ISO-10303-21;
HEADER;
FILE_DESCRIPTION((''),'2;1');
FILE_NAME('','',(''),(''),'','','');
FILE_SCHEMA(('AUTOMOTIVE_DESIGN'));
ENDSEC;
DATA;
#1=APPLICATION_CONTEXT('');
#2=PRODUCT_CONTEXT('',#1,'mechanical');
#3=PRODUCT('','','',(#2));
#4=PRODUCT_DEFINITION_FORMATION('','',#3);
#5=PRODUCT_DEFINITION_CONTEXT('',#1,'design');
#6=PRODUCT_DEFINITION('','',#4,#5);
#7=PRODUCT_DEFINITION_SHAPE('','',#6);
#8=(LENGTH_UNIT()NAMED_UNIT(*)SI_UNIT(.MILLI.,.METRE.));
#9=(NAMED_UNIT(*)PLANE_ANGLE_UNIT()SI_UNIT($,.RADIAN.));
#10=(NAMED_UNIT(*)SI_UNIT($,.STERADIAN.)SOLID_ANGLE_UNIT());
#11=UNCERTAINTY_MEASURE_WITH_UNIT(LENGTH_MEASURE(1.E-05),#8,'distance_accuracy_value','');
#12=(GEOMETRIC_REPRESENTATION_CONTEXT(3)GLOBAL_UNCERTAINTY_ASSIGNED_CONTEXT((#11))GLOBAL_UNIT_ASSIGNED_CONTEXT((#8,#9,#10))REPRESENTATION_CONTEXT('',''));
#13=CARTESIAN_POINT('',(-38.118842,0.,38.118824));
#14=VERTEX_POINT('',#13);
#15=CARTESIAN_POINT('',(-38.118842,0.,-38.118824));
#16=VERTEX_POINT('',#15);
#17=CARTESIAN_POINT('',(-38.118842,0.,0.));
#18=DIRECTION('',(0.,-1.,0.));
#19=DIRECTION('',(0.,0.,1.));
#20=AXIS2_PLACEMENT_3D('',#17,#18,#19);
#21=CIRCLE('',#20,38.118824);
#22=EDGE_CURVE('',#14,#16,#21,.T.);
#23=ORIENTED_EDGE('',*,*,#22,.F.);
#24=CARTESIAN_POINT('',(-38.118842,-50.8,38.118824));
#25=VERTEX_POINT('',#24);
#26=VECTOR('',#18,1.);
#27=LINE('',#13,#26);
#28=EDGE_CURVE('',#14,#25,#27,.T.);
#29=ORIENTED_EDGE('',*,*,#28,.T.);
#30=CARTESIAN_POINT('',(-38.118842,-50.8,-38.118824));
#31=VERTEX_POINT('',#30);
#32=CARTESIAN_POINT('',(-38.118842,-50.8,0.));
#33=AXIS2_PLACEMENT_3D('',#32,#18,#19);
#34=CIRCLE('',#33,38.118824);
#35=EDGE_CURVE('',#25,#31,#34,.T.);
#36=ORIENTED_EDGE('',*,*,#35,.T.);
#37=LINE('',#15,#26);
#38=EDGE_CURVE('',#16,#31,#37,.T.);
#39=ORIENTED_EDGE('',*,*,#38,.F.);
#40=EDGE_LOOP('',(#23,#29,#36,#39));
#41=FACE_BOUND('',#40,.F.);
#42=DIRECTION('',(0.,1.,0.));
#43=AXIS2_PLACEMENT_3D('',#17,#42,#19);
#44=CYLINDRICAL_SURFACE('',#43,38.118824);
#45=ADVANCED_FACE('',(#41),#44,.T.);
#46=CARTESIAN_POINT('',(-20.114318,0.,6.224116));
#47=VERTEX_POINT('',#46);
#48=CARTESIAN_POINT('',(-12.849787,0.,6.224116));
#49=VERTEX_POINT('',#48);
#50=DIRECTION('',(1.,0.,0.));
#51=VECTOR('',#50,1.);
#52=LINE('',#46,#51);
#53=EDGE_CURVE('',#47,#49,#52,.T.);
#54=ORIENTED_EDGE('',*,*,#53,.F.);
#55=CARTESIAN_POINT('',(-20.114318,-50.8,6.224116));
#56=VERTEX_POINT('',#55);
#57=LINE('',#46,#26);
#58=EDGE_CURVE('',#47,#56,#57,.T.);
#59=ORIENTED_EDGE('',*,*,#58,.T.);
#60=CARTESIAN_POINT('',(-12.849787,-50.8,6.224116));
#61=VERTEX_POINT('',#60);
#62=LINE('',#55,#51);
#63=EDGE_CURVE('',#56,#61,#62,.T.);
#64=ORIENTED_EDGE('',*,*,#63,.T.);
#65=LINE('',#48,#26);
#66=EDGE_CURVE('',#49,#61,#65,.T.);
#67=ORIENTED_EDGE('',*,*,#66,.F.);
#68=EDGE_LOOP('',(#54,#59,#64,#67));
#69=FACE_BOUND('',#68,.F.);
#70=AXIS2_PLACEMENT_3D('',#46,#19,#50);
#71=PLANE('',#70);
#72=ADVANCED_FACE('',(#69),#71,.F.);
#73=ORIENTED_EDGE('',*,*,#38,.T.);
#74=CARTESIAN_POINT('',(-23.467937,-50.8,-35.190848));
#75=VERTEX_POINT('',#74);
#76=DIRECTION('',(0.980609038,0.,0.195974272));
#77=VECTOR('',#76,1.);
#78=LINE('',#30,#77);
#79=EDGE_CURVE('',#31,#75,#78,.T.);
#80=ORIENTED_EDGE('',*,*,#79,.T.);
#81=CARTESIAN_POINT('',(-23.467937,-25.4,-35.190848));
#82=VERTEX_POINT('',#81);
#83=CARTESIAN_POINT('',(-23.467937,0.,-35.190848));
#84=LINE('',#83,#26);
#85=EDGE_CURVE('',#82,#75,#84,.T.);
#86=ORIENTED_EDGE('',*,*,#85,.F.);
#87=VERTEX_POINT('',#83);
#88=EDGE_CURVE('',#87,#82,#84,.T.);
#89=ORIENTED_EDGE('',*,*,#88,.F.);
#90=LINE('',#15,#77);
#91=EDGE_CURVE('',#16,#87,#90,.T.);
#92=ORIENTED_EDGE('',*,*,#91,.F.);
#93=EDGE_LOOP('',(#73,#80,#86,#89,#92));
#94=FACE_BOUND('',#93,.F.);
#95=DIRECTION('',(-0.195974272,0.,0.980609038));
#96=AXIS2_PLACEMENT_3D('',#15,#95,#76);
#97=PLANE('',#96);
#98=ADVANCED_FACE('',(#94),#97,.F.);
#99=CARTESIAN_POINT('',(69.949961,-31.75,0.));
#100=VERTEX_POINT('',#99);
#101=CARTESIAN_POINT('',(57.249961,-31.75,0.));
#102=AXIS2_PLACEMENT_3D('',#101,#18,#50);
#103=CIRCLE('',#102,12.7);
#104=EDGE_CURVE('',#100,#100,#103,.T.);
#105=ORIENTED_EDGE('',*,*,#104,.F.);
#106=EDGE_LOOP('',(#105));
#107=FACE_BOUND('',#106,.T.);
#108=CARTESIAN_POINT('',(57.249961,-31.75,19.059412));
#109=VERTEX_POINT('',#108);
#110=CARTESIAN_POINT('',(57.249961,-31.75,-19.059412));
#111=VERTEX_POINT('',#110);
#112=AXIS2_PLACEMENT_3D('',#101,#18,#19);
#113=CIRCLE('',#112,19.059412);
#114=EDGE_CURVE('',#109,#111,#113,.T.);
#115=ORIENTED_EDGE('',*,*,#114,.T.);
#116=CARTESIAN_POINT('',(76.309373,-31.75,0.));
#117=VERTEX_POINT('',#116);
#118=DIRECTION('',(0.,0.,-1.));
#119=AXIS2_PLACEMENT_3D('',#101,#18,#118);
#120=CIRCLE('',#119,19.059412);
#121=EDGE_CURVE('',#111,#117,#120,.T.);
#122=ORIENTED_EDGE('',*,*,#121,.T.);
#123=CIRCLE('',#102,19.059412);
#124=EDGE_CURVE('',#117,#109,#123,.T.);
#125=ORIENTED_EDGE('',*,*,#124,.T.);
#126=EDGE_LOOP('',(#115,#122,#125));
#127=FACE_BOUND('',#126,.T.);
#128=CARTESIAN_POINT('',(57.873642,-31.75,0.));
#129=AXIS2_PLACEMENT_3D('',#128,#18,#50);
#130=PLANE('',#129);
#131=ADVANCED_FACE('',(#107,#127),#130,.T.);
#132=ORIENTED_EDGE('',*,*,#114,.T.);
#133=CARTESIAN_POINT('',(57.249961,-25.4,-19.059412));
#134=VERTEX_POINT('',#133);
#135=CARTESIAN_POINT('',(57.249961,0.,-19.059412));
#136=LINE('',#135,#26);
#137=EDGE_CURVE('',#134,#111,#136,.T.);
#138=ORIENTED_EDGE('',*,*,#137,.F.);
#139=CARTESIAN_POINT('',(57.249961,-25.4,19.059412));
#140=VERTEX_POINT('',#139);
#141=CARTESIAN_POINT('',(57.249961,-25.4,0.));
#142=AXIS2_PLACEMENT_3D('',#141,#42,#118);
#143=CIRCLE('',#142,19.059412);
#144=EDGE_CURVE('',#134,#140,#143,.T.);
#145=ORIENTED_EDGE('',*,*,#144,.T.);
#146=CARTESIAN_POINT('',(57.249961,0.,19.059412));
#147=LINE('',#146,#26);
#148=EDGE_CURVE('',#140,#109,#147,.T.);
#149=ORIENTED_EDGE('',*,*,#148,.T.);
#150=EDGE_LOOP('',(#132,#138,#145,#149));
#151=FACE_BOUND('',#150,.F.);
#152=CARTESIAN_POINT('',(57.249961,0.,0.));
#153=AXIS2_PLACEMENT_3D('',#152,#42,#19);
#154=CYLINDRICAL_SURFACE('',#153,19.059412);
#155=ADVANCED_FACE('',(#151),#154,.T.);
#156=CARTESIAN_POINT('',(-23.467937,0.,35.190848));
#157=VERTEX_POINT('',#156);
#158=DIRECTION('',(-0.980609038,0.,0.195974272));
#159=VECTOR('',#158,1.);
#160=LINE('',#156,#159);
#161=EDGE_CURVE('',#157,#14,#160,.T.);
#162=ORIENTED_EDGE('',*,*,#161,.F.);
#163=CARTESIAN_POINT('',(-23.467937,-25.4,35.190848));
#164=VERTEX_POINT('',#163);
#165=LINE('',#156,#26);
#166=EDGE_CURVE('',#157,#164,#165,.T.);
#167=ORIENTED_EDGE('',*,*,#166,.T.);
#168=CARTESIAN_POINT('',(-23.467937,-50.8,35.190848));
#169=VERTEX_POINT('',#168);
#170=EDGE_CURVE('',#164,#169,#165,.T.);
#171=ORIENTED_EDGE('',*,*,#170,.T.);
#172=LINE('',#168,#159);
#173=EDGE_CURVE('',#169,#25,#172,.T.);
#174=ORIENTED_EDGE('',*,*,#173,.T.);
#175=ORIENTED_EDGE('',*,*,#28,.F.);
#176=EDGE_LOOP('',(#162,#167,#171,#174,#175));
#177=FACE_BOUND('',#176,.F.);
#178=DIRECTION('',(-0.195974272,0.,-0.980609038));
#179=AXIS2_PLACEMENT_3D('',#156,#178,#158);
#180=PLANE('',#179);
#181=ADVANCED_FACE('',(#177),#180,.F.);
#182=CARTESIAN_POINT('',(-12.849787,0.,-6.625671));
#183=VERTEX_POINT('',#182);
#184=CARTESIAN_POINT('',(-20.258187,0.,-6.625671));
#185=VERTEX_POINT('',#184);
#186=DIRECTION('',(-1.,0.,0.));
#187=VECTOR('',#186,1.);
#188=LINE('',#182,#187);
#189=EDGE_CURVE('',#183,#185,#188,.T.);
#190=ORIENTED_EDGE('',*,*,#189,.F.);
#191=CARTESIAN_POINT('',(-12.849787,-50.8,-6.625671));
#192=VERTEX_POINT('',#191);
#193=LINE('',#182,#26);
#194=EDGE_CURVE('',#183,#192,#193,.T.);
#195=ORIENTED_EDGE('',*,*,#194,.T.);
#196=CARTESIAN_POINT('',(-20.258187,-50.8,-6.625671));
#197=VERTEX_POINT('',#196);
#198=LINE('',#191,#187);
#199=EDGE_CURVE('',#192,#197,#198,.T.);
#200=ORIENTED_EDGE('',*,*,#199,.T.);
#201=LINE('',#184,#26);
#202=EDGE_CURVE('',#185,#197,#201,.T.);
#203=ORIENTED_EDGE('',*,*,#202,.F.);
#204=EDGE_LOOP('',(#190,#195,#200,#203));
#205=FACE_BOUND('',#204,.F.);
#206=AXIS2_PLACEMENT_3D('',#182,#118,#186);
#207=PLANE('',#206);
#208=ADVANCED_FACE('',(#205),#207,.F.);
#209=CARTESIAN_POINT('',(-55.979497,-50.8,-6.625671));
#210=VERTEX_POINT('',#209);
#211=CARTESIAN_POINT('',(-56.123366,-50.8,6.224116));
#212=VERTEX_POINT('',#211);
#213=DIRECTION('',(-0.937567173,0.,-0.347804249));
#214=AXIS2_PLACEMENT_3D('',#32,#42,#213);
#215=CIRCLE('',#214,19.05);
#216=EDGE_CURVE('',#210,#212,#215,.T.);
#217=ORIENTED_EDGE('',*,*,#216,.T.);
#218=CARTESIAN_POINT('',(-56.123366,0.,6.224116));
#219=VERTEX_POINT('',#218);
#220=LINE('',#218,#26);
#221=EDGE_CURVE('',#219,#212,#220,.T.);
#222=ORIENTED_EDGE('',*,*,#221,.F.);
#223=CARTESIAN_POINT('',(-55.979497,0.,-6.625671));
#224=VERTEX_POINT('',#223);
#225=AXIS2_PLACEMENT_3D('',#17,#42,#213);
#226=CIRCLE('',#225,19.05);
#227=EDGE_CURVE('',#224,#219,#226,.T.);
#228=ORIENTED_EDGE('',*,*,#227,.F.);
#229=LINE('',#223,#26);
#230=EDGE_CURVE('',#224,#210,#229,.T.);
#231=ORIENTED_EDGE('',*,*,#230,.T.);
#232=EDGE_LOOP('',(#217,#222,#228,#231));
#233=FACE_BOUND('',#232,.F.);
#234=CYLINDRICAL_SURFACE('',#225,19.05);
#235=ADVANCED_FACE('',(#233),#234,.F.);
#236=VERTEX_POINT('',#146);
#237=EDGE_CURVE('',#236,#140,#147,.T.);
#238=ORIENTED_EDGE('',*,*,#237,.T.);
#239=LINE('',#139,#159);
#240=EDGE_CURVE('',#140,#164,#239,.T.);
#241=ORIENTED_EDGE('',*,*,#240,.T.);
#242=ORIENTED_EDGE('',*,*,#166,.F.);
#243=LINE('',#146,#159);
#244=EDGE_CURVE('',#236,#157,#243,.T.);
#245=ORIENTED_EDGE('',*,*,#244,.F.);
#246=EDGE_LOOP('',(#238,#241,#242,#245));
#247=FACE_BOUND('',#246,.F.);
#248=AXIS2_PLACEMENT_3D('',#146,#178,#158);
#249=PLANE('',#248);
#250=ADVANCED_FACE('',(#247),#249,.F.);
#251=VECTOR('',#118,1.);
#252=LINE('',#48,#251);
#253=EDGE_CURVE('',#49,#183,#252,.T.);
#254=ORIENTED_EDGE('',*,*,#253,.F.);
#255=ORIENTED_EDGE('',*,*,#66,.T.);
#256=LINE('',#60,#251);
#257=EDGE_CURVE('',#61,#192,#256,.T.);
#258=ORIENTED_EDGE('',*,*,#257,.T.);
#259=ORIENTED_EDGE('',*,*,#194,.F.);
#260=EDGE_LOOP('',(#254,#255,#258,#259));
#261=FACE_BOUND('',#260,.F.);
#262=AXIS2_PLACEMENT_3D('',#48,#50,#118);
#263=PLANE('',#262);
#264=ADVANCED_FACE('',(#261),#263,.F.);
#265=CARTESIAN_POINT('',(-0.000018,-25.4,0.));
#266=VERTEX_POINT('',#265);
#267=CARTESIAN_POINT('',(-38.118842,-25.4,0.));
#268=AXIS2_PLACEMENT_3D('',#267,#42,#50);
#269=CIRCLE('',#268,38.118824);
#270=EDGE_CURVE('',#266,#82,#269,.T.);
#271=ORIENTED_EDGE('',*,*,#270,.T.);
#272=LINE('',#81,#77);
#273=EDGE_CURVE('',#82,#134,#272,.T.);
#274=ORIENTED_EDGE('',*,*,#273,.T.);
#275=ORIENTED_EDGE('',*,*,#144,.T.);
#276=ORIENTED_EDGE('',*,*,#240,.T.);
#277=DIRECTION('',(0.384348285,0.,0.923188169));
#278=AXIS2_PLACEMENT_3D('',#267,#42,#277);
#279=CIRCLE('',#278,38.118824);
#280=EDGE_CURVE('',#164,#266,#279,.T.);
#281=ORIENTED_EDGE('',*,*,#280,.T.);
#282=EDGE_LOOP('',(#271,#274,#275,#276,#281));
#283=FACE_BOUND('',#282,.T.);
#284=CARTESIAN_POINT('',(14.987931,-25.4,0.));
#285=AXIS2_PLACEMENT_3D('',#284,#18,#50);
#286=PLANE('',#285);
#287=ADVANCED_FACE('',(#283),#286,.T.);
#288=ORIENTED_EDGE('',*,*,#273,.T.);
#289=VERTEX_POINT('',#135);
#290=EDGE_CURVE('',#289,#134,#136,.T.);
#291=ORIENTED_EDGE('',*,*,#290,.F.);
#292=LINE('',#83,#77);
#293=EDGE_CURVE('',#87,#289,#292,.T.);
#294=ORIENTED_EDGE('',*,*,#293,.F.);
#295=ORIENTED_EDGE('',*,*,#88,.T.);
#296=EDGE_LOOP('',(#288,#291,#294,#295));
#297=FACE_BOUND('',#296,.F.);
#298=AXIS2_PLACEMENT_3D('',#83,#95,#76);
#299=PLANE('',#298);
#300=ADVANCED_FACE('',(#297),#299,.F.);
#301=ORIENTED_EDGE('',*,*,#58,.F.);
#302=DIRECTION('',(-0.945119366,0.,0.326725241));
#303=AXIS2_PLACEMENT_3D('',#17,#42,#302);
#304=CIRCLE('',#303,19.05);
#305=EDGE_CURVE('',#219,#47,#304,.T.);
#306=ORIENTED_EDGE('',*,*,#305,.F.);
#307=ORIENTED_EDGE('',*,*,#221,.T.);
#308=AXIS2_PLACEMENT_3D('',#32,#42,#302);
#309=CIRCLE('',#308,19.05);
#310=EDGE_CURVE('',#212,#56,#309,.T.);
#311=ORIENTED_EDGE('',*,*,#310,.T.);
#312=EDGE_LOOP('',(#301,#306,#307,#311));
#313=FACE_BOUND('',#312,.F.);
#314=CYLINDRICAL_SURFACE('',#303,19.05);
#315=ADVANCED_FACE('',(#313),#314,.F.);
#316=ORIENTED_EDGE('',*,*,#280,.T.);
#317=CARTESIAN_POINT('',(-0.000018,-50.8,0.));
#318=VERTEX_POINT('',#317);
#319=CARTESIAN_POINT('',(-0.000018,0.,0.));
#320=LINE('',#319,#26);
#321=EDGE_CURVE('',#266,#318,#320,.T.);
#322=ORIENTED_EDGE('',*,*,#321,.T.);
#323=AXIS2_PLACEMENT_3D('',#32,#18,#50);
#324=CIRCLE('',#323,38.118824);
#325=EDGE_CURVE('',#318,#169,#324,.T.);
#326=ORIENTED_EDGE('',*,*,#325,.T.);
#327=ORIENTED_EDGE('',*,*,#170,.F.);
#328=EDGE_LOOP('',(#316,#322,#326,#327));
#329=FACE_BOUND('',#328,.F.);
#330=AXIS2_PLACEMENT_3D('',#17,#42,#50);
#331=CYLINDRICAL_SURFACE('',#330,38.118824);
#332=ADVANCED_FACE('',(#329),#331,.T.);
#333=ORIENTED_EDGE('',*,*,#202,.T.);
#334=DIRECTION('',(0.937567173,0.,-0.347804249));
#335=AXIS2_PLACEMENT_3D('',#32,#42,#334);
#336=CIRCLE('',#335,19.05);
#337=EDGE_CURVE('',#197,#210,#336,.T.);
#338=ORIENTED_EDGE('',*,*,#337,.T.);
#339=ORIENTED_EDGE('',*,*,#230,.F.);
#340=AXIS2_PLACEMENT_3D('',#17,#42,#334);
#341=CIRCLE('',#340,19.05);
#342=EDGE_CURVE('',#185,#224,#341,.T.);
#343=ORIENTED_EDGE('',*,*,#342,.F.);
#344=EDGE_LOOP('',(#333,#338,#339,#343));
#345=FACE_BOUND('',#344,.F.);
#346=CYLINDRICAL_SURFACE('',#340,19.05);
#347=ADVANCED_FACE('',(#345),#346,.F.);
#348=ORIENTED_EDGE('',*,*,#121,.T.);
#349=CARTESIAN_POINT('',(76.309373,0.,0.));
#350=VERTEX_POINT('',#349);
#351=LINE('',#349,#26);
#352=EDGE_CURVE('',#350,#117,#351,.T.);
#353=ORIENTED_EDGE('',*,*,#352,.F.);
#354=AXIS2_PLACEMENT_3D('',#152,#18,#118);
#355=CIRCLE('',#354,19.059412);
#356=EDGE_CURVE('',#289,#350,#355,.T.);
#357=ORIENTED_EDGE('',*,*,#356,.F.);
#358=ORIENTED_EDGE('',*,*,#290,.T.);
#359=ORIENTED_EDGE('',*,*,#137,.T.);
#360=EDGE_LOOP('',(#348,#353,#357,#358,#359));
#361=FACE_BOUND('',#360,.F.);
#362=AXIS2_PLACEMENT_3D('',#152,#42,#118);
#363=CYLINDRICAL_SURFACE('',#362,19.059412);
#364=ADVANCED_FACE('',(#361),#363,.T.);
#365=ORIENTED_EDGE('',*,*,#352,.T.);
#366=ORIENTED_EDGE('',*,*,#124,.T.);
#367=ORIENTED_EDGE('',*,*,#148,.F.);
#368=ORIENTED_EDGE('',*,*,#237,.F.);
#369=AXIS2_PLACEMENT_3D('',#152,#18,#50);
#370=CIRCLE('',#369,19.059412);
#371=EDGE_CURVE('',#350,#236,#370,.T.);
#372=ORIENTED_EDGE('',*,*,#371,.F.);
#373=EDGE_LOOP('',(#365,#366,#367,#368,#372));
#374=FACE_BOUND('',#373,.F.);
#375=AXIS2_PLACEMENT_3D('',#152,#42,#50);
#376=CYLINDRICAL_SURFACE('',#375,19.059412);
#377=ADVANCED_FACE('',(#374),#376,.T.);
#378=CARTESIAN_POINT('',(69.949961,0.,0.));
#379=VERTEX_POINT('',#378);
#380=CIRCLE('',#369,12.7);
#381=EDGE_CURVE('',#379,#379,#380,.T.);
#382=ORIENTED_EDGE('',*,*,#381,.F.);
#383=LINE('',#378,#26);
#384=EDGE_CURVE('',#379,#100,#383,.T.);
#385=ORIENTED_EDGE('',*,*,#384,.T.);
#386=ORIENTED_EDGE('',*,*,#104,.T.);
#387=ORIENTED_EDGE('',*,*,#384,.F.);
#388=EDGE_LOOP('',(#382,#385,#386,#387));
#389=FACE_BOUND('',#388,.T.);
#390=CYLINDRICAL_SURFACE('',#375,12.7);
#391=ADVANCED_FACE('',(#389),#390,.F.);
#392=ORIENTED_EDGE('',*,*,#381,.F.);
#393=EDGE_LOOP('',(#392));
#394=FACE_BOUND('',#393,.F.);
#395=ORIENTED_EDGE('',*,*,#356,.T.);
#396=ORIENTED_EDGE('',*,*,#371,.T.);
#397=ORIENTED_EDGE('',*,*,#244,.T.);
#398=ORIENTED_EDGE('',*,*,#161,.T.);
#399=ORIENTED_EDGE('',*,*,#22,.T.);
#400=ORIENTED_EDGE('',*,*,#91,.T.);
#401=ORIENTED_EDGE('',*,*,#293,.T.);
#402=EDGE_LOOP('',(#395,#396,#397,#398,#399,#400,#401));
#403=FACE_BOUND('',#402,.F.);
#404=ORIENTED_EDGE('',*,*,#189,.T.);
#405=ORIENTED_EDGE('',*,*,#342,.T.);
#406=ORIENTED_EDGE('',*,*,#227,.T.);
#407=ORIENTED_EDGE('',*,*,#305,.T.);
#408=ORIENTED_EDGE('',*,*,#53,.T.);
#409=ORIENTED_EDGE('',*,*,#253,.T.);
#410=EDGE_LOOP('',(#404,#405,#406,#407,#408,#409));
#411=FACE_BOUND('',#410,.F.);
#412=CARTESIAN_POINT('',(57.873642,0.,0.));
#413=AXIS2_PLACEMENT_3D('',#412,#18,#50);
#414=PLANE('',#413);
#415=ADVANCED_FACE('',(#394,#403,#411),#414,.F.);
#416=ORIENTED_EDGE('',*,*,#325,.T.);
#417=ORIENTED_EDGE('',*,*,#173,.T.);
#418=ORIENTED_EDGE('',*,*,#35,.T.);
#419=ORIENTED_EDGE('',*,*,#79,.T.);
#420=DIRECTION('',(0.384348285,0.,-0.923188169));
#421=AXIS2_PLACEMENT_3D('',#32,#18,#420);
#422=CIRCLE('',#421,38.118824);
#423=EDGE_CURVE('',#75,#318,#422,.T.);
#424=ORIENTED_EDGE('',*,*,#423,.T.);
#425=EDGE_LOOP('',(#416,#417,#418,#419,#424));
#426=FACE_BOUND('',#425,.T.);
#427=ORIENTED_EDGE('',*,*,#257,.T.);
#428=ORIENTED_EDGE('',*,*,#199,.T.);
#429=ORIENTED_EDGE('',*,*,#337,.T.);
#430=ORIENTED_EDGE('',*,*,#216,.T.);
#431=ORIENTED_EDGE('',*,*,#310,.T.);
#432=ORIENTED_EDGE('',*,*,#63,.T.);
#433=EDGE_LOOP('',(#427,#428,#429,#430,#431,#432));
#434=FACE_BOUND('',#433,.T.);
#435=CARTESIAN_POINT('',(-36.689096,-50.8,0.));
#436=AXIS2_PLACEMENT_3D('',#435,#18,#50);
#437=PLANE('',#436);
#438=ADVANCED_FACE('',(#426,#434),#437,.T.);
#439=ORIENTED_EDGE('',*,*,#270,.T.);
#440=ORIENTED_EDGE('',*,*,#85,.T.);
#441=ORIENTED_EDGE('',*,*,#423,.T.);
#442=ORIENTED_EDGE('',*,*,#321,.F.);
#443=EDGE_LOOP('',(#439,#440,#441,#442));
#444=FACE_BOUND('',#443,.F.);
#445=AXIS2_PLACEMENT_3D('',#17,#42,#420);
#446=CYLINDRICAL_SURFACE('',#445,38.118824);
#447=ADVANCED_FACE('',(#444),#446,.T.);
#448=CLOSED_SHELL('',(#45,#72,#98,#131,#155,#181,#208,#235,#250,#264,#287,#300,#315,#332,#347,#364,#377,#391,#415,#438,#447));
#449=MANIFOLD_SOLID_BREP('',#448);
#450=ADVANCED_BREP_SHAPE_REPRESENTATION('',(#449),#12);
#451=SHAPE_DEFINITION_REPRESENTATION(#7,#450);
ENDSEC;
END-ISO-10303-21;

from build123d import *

# Parameters (mm, degrees)
F1_DEPTH = 50.8
F2_DEPTH = 25.4
F0_R     = 12.7
F3_DEPTH = 31.75


with BuildPart() as f1:
    # F0 (on Front) → F1 (new body)
    with BuildSketch(Plane.XZ):
        with BuildLine():
            Line((-23.4679372151, 35.1908475518), (-38.1188419469, 38.1188242326))
            ThreePointArc((-38.1188419469, 38.1188242326), (-76.2376661794, 0), (-38.1188419469, -38.1188242326))
            Line((-38.1188419469, -38.1188242326), (-23.4679372151, -35.1908475518))
            ThreePointArc((-23.4679372151, -35.1908475518), (-6.4051223354, -21.1491075291), (-1.77143e-05, 0))
            ThreePointArc((-1.77143e-05, 0), (-6.4051223354, 21.1491075291), (-23.4679372151, 35.1908475518))
        make_face()
        with BuildLine():
            ThreePointArc((-55.9794965989, -6.6256709397), (-57.1676480455, -0.2132749771), (-56.123365877, 6.2241158448))
            ThreePointArc((-56.123365877, 6.2241158448), (-38.1188419468, 19.05), (-20.1143180167, 6.2241158448))
            Line((-20.1143180167, 6.2241158448), (-12.8497872502, 6.2241158448))
            Line((-12.8497872502, 6.2241158448), (-12.8497872502, -6.6256709397))
            Line((-12.8497872502, -6.6256709397), (-20.2581872948, -6.6256709397))
            ThreePointArc((-20.2581872948, -6.6256709397), (-38.1188419468, -19.05), (-55.9794965989, -6.6256709397))
        make_face(mode=Mode.SUBTRACT)
    extrude(amount=F1_DEPTH)

    # F0 (on Front) → F2 (join)
    with BuildSketch(Plane.XZ):
        with BuildLine():
            Line((57.2499610198, 19.0594121163), (-23.4679372151, 35.1908475518))
            ThreePointArc((-23.4679372151, 35.1908475518), (-6.4051223354, 21.1491075291), (-1.77143e-05, 0))
            ThreePointArc((-1.77143e-05, 0), (-6.4051223354, -21.1491075291), (-23.4679372151, -35.1908475518))
            Line((-23.4679372151, -35.1908475518), (57.2499610198, -19.0594121163))
            ThreePointArc((57.2499610198, -19.0594121163), (38.1905489035, 0), (57.2499610198, 19.0594121163))
        make_face()
    extrude(amount=F2_DEPTH)

    # F0 (on Front) → F3 (join)
    with BuildSketch(Plane.XZ):
        with BuildLine():
            ThreePointArc((76.309373136, 0), (70.7270005726, 13.4770395529), (57.2499610198, 19.0594121163))
            ThreePointArc((57.2499610198, 19.0594121163), (38.1905489035, 0), (57.2499610198, -19.0594121163))
            ThreePointArc((57.2499610198, -19.0594121163), (70.7270005726, -13.4770395529), (76.309373136, 0))
        make_face()
        with Locations((57.2499610198, 0)):
            Circle(F0_R, mode=Mode.SUBTRACT)
    extrude(amount=F3_DEPTH)


solid = f1.part
